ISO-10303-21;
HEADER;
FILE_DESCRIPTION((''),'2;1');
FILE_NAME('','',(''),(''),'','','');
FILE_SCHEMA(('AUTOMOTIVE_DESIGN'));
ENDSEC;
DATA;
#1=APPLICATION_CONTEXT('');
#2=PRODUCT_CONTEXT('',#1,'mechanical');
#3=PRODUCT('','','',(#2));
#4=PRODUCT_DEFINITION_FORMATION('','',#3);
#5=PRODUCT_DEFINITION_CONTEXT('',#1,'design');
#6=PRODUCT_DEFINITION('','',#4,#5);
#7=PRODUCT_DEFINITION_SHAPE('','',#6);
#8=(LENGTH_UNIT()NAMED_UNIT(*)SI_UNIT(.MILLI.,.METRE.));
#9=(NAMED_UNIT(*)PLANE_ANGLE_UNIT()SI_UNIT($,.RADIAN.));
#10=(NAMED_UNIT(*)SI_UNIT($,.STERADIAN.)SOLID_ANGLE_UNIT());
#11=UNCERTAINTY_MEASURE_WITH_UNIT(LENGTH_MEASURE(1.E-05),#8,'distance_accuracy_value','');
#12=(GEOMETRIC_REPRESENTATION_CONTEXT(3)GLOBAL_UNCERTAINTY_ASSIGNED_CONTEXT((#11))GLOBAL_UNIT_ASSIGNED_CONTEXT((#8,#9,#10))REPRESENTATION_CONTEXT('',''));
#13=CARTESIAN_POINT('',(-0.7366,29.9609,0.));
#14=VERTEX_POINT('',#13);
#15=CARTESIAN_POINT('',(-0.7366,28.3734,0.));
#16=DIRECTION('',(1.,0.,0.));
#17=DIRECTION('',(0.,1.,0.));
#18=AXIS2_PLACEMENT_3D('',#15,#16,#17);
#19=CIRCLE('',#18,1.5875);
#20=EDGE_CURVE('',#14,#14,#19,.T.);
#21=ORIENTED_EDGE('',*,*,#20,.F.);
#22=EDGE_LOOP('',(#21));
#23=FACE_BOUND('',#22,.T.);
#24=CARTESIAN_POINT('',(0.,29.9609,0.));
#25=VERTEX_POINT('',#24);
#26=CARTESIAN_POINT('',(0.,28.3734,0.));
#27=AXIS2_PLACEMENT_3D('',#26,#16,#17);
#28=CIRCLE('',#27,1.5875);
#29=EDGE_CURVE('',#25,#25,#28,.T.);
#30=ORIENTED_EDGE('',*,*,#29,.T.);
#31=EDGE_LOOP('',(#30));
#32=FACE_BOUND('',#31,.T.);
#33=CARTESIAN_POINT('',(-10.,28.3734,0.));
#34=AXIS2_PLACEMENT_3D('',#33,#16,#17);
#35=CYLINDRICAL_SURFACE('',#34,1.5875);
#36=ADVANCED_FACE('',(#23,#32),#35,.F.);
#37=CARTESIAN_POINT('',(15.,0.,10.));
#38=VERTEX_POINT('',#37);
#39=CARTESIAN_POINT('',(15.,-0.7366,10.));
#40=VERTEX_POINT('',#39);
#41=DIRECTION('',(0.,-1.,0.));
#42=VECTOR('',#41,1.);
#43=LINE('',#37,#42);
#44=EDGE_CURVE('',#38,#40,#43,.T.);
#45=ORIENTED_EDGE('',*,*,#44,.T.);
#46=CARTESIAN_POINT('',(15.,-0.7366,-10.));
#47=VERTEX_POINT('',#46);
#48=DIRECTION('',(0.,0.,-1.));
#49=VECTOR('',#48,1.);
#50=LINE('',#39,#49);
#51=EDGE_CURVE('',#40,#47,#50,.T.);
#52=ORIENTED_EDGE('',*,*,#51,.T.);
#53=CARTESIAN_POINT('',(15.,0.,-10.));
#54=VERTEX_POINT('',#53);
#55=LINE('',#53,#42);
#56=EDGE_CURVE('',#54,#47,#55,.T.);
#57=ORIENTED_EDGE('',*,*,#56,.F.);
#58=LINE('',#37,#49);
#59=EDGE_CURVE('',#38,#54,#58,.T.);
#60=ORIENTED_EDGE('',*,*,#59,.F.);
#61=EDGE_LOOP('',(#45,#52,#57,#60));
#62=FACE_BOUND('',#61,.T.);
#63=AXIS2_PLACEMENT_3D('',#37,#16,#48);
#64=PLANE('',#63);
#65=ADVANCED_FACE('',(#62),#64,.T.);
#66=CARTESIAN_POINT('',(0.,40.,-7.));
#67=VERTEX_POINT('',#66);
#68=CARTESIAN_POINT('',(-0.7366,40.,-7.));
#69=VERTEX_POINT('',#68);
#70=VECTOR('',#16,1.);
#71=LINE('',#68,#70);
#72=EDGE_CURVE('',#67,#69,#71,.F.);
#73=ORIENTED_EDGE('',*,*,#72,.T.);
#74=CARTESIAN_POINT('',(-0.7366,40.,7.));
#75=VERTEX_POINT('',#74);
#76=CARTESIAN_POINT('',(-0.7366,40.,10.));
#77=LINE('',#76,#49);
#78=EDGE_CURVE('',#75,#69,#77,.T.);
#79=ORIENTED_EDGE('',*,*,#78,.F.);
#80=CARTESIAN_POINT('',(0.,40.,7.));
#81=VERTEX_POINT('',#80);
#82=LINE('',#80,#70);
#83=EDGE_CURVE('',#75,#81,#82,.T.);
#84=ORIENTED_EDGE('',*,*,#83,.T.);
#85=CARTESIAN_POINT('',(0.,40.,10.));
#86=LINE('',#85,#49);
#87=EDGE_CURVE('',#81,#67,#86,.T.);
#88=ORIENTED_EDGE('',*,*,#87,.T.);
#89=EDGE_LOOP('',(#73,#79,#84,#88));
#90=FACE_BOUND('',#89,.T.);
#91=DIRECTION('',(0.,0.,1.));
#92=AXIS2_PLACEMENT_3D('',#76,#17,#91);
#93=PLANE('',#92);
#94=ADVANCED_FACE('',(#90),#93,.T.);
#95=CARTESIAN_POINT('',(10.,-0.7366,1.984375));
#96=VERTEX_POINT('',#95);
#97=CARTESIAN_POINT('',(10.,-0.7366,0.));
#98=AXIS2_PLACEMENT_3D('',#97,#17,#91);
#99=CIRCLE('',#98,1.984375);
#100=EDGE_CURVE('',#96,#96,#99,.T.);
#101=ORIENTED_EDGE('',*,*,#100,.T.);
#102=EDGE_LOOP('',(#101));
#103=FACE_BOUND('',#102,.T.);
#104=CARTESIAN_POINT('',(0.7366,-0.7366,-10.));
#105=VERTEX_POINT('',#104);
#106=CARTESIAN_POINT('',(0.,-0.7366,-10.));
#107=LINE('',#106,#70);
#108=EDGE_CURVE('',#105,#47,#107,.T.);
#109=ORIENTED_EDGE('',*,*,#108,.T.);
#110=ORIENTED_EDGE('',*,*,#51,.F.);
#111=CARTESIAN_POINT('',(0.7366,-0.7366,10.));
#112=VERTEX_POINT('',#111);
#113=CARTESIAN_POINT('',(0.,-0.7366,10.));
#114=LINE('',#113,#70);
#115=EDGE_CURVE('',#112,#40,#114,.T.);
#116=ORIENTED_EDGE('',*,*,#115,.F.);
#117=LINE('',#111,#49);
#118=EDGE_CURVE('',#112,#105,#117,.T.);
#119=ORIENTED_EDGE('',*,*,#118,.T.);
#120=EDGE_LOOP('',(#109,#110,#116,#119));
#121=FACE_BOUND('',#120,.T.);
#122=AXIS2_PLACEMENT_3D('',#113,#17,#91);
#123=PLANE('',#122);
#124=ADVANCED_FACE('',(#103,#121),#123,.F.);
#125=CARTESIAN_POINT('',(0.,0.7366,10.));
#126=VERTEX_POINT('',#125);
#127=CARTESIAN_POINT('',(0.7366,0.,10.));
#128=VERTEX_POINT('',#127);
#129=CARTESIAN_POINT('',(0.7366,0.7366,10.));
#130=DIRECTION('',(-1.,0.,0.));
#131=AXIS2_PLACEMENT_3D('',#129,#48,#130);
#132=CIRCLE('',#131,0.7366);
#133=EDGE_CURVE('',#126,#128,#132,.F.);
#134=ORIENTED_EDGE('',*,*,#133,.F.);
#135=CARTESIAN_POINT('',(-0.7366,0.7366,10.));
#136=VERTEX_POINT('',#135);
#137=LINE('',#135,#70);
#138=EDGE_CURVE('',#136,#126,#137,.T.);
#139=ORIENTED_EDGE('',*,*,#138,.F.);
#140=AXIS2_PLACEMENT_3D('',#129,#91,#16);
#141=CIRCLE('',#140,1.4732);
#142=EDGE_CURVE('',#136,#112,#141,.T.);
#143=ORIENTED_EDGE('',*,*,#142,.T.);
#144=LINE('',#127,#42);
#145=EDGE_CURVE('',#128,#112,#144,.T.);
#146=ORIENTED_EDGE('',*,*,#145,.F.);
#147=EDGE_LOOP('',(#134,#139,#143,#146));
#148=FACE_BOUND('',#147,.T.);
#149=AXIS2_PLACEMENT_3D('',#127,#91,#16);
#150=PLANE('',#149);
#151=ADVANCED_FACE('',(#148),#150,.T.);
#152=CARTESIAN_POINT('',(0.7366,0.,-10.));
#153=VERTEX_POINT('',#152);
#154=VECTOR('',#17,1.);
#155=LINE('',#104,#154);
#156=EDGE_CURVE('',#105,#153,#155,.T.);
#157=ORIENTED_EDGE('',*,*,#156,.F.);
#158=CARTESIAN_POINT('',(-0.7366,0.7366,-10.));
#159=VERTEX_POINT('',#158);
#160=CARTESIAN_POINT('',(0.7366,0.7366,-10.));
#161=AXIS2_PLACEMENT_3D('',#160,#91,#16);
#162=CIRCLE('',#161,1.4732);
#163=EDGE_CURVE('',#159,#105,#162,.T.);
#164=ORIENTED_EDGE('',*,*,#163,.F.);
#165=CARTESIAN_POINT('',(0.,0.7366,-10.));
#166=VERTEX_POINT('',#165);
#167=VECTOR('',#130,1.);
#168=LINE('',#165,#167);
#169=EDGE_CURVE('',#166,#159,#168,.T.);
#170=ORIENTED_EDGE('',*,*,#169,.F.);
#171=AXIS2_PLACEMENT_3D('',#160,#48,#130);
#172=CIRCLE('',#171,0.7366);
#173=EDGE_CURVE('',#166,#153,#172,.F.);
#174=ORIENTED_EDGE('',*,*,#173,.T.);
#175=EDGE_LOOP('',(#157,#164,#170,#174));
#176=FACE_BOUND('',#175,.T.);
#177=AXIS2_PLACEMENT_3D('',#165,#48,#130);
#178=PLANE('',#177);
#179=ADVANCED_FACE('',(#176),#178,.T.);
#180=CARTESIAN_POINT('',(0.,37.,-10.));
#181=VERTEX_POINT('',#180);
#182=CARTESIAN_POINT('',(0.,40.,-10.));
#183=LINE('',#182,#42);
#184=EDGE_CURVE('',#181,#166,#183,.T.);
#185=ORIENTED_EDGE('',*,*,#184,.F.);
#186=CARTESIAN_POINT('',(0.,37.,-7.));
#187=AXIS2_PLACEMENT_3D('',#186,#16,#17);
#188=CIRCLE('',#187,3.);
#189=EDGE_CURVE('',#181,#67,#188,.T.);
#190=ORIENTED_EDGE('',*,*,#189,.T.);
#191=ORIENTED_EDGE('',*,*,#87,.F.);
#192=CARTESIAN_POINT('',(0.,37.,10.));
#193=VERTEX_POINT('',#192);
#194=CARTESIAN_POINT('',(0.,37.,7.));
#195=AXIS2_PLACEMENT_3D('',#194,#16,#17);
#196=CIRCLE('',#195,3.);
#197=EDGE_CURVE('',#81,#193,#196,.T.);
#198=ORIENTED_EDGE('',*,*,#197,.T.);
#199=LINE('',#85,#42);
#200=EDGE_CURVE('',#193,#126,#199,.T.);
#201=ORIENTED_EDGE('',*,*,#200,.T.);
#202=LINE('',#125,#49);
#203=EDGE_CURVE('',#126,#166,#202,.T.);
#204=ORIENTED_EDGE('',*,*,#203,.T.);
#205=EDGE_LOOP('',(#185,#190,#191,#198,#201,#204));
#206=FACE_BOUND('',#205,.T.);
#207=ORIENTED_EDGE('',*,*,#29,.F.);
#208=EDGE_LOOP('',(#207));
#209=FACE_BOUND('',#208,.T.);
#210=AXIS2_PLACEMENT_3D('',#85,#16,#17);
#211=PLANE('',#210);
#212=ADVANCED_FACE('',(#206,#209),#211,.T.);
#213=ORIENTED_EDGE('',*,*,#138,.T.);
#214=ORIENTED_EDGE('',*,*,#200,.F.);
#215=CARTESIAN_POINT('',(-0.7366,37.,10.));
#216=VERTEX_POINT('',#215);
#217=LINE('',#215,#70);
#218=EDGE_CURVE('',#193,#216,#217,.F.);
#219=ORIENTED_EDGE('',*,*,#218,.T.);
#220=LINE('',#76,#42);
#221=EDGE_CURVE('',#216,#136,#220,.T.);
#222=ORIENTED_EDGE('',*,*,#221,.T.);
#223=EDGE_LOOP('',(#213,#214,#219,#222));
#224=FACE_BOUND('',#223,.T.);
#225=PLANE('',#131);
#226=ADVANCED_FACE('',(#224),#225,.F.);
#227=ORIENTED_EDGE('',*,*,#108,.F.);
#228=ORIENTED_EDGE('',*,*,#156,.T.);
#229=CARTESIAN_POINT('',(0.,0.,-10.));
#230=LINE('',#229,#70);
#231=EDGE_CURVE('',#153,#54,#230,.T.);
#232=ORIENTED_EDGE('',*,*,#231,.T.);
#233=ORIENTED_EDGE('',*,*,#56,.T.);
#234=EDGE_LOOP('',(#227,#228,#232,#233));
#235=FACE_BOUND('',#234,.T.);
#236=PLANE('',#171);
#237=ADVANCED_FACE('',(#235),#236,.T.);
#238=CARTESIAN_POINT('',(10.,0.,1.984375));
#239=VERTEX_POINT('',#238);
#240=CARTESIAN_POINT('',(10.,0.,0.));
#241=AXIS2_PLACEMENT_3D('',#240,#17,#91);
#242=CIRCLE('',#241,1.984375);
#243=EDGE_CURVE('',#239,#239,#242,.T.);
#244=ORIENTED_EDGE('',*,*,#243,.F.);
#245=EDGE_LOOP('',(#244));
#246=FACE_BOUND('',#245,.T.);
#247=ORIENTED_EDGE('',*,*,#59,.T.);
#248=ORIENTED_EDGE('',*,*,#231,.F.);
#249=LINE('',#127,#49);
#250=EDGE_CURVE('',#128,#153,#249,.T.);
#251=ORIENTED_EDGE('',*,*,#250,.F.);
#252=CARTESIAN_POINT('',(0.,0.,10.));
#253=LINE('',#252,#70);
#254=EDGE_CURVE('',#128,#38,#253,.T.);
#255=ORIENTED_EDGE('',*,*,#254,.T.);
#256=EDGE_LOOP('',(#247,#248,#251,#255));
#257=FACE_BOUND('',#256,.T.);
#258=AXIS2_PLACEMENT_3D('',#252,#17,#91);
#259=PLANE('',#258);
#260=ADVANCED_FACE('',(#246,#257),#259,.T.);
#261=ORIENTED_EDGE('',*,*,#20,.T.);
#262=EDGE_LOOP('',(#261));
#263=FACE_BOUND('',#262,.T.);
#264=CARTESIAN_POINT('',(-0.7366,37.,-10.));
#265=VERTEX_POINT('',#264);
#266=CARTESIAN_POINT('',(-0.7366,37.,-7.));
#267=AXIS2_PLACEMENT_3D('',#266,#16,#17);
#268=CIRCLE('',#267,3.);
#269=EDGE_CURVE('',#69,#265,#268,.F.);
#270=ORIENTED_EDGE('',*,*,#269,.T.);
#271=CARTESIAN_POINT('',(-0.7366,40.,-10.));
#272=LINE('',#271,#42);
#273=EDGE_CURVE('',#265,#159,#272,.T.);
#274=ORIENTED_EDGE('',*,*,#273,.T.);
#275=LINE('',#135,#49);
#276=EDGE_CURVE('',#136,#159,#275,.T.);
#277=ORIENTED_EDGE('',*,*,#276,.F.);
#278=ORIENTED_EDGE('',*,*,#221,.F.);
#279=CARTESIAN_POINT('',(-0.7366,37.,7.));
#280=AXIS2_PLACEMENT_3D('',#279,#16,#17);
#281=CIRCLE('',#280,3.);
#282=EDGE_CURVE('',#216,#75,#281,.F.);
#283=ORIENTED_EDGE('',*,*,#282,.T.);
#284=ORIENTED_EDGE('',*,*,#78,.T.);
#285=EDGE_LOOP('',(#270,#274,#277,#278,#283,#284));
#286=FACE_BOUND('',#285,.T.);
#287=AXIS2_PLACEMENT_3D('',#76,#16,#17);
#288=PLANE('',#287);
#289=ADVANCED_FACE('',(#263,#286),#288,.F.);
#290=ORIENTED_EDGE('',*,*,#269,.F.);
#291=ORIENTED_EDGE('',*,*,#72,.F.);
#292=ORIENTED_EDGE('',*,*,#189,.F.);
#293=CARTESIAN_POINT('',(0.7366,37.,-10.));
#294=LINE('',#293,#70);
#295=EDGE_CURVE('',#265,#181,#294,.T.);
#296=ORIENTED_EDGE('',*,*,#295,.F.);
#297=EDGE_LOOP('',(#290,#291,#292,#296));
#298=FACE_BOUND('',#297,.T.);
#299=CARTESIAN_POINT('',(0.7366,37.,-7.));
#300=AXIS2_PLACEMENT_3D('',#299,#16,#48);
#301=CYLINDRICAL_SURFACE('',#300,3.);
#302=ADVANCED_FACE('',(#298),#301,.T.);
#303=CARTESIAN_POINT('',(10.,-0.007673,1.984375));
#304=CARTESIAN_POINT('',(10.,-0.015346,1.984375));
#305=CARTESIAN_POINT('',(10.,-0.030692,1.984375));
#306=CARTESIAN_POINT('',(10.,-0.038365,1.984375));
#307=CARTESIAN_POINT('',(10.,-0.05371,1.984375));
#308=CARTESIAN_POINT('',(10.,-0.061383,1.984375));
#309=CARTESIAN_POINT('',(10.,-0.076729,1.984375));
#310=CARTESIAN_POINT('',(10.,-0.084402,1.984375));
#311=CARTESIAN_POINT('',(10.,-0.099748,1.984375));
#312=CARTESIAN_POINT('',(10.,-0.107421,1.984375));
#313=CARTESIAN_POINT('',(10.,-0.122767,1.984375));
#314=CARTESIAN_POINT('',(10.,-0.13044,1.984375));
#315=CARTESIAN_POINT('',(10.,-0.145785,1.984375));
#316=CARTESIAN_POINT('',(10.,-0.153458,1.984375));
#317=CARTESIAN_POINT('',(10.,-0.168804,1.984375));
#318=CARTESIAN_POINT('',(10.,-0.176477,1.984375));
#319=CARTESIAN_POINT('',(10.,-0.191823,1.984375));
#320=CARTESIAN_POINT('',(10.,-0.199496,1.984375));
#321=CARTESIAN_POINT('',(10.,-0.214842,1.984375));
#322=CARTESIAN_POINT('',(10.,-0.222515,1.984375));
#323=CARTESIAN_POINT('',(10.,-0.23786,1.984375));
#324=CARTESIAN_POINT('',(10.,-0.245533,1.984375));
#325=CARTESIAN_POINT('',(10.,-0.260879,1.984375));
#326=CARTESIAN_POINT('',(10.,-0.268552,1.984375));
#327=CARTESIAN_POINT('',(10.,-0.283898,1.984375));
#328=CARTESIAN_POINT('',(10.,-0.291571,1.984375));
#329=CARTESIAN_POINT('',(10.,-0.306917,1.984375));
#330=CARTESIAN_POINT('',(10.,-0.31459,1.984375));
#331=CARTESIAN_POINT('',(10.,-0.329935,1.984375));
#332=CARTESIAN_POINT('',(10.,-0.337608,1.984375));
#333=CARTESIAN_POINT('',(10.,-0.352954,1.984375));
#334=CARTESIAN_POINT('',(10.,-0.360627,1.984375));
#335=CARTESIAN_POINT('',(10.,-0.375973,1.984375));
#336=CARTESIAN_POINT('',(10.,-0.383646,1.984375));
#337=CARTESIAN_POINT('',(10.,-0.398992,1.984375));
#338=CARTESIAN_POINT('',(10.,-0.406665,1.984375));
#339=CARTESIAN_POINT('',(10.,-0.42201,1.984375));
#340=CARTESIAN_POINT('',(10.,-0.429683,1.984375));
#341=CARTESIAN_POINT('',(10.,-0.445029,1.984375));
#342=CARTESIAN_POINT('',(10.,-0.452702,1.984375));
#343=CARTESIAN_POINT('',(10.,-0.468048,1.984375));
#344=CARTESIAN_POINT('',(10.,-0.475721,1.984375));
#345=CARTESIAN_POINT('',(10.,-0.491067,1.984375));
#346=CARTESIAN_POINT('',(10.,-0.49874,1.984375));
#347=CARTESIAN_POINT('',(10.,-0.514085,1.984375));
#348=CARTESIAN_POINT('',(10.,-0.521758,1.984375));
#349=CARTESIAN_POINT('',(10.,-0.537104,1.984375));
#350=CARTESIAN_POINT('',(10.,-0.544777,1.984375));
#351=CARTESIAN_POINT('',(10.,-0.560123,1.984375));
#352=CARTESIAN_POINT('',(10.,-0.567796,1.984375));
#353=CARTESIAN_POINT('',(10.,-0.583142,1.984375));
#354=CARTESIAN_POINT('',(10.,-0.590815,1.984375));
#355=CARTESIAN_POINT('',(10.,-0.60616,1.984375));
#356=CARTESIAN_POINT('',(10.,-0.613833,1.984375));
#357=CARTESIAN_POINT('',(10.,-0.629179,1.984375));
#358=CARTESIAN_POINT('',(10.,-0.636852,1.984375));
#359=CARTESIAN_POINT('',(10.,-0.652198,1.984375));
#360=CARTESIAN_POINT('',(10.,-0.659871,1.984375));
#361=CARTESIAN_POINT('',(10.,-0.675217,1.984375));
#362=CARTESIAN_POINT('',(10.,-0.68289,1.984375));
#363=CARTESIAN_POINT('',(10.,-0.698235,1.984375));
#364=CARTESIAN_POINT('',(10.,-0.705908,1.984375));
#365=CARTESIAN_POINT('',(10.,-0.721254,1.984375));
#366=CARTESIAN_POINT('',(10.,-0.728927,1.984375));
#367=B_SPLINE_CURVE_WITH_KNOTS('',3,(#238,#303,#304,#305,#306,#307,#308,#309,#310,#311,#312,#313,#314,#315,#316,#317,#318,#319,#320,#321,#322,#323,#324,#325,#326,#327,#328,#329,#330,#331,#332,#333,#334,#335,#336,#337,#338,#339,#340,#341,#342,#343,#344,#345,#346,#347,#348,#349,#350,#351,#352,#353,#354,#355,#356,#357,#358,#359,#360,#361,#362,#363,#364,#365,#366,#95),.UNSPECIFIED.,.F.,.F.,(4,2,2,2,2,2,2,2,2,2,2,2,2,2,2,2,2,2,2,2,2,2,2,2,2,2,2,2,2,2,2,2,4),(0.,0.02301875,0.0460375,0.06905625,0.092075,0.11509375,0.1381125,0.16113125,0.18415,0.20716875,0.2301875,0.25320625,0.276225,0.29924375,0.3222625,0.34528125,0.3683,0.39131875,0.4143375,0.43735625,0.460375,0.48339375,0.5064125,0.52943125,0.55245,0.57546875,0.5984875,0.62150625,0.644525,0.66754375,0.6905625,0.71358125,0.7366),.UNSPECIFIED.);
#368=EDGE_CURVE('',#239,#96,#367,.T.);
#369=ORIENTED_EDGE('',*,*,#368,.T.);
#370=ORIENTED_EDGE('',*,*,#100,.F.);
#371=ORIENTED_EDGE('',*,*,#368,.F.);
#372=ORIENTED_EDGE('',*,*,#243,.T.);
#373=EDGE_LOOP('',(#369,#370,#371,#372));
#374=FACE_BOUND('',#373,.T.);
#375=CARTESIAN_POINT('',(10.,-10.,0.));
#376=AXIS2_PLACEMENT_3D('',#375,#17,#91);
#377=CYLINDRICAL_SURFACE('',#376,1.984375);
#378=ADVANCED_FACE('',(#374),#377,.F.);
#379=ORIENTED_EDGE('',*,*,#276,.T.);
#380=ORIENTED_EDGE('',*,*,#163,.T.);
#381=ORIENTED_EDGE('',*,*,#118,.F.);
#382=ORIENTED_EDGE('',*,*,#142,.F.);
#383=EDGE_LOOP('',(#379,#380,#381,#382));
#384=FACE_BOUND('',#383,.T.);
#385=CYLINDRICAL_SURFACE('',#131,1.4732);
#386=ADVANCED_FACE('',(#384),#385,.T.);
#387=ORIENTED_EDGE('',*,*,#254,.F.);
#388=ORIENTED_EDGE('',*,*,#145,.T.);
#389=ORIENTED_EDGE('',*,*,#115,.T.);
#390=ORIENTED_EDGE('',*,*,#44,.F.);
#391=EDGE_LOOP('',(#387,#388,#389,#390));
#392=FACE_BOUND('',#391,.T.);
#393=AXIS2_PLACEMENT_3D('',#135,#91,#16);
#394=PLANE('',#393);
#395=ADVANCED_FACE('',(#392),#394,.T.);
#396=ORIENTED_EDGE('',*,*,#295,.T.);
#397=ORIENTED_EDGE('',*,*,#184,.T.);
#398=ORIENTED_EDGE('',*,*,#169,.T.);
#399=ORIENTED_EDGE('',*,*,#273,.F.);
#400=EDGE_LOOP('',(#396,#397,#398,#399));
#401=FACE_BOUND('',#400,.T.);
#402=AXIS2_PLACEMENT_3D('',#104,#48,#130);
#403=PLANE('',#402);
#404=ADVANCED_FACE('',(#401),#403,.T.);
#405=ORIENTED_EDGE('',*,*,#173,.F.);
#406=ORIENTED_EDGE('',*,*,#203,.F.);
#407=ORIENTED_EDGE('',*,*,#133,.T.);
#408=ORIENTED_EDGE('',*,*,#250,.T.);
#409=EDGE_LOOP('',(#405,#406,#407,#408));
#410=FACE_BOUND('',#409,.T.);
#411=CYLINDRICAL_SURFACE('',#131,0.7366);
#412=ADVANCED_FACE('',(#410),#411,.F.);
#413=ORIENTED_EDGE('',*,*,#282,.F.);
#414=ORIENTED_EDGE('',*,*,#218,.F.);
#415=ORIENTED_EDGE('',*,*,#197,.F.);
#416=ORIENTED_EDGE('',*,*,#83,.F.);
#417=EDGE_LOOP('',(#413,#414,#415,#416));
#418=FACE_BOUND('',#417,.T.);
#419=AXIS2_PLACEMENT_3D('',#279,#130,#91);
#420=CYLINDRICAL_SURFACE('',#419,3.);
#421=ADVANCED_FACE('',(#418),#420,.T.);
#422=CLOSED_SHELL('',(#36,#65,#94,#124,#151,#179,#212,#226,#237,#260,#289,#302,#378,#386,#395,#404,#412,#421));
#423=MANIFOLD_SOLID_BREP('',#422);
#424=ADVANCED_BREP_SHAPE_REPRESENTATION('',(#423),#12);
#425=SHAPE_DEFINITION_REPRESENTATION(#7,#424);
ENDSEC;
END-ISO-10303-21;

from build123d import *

# Parameters (mm, degrees)
BASE_FLANGE1_DEPTH      = 10
BASE_FLANGE1_DEPTH_BACK = 10
SKETCH6_R               = 1.5875
CUT_EXTRUDE1_DEPTH      = 10
SKETCH7_R               = 1.984375
CUT_EXTRUDE2_DEPTH      = 10
FILLET1_R               = 3


# Sheet-metal steps are written as plain solids
with BuildPart() as part:
    # Sketch1 → Base-Flange1 (new, two sides: drawn at the far end of the back side and taken through both)
    with BuildSketch(Plane.XY.offset(-BASE_FLANGE1_DEPTH_BACK)):
        with BuildLine():
            Line((0, 40), (0, 0.7366))
            ThreePointArc((0, 0.7366), (0.215745145, 0.215745145), (0.7366, 0))
            Line((0.7366, 0), (15, 0))
            Line((15, 0), (15, -0.7366))
            Line((15, -0.7366), (0.7366, -0.7366))
            ThreePointArc((0.7366, -0.7366), (-0.30510971, -0.30510971), (-0.7366, 0.7366))
            Line((-0.7366, 0.7366), (-0.7366, 40))
            Line((-0.7366, 40), (0, 40))
        make_face()
    extrude(amount=BASE_FLANGE1_DEPTH + BASE_FLANGE1_DEPTH_BACK)

    # Sketch6 → Cut-Extrude1 (cut)
    with BuildSketch(Plane(origin=(0, 0, 0), x_dir=(0, 0, -1), z_dir=(1, 0, 0))):
        with Locations(Location((0, 28.3734, 0), (0, 0, 90))):
            Circle(SKETCH6_R)
    extrude(amount=-CUT_EXTRUDE1_DEPTH, mode=Mode.SUBTRACT)

    # Sketch7 → Cut-Extrude2 (cut)
    with BuildSketch(Plane(origin=(0, 0, 0), x_dir=(1, 0, 0), z_dir=(0, 1, 0))):
        with Locations(Location((10, 0, 0), (0, 0, 270))):
            Circle(SKETCH7_R)
    extrude(amount=-CUT_EXTRUDE2_DEPTH, mode=Mode.SUBTRACT)

    # Fillet1
    fillet1_edges = [part.edges().sort_by_distance(p)[0] for p in [
        (-0.3683, 40, 10),
        (-0.3683, 40, -10),
    ]]
    fillet(fillet1_edges, radius=FILLET1_R)


solid = part.part
